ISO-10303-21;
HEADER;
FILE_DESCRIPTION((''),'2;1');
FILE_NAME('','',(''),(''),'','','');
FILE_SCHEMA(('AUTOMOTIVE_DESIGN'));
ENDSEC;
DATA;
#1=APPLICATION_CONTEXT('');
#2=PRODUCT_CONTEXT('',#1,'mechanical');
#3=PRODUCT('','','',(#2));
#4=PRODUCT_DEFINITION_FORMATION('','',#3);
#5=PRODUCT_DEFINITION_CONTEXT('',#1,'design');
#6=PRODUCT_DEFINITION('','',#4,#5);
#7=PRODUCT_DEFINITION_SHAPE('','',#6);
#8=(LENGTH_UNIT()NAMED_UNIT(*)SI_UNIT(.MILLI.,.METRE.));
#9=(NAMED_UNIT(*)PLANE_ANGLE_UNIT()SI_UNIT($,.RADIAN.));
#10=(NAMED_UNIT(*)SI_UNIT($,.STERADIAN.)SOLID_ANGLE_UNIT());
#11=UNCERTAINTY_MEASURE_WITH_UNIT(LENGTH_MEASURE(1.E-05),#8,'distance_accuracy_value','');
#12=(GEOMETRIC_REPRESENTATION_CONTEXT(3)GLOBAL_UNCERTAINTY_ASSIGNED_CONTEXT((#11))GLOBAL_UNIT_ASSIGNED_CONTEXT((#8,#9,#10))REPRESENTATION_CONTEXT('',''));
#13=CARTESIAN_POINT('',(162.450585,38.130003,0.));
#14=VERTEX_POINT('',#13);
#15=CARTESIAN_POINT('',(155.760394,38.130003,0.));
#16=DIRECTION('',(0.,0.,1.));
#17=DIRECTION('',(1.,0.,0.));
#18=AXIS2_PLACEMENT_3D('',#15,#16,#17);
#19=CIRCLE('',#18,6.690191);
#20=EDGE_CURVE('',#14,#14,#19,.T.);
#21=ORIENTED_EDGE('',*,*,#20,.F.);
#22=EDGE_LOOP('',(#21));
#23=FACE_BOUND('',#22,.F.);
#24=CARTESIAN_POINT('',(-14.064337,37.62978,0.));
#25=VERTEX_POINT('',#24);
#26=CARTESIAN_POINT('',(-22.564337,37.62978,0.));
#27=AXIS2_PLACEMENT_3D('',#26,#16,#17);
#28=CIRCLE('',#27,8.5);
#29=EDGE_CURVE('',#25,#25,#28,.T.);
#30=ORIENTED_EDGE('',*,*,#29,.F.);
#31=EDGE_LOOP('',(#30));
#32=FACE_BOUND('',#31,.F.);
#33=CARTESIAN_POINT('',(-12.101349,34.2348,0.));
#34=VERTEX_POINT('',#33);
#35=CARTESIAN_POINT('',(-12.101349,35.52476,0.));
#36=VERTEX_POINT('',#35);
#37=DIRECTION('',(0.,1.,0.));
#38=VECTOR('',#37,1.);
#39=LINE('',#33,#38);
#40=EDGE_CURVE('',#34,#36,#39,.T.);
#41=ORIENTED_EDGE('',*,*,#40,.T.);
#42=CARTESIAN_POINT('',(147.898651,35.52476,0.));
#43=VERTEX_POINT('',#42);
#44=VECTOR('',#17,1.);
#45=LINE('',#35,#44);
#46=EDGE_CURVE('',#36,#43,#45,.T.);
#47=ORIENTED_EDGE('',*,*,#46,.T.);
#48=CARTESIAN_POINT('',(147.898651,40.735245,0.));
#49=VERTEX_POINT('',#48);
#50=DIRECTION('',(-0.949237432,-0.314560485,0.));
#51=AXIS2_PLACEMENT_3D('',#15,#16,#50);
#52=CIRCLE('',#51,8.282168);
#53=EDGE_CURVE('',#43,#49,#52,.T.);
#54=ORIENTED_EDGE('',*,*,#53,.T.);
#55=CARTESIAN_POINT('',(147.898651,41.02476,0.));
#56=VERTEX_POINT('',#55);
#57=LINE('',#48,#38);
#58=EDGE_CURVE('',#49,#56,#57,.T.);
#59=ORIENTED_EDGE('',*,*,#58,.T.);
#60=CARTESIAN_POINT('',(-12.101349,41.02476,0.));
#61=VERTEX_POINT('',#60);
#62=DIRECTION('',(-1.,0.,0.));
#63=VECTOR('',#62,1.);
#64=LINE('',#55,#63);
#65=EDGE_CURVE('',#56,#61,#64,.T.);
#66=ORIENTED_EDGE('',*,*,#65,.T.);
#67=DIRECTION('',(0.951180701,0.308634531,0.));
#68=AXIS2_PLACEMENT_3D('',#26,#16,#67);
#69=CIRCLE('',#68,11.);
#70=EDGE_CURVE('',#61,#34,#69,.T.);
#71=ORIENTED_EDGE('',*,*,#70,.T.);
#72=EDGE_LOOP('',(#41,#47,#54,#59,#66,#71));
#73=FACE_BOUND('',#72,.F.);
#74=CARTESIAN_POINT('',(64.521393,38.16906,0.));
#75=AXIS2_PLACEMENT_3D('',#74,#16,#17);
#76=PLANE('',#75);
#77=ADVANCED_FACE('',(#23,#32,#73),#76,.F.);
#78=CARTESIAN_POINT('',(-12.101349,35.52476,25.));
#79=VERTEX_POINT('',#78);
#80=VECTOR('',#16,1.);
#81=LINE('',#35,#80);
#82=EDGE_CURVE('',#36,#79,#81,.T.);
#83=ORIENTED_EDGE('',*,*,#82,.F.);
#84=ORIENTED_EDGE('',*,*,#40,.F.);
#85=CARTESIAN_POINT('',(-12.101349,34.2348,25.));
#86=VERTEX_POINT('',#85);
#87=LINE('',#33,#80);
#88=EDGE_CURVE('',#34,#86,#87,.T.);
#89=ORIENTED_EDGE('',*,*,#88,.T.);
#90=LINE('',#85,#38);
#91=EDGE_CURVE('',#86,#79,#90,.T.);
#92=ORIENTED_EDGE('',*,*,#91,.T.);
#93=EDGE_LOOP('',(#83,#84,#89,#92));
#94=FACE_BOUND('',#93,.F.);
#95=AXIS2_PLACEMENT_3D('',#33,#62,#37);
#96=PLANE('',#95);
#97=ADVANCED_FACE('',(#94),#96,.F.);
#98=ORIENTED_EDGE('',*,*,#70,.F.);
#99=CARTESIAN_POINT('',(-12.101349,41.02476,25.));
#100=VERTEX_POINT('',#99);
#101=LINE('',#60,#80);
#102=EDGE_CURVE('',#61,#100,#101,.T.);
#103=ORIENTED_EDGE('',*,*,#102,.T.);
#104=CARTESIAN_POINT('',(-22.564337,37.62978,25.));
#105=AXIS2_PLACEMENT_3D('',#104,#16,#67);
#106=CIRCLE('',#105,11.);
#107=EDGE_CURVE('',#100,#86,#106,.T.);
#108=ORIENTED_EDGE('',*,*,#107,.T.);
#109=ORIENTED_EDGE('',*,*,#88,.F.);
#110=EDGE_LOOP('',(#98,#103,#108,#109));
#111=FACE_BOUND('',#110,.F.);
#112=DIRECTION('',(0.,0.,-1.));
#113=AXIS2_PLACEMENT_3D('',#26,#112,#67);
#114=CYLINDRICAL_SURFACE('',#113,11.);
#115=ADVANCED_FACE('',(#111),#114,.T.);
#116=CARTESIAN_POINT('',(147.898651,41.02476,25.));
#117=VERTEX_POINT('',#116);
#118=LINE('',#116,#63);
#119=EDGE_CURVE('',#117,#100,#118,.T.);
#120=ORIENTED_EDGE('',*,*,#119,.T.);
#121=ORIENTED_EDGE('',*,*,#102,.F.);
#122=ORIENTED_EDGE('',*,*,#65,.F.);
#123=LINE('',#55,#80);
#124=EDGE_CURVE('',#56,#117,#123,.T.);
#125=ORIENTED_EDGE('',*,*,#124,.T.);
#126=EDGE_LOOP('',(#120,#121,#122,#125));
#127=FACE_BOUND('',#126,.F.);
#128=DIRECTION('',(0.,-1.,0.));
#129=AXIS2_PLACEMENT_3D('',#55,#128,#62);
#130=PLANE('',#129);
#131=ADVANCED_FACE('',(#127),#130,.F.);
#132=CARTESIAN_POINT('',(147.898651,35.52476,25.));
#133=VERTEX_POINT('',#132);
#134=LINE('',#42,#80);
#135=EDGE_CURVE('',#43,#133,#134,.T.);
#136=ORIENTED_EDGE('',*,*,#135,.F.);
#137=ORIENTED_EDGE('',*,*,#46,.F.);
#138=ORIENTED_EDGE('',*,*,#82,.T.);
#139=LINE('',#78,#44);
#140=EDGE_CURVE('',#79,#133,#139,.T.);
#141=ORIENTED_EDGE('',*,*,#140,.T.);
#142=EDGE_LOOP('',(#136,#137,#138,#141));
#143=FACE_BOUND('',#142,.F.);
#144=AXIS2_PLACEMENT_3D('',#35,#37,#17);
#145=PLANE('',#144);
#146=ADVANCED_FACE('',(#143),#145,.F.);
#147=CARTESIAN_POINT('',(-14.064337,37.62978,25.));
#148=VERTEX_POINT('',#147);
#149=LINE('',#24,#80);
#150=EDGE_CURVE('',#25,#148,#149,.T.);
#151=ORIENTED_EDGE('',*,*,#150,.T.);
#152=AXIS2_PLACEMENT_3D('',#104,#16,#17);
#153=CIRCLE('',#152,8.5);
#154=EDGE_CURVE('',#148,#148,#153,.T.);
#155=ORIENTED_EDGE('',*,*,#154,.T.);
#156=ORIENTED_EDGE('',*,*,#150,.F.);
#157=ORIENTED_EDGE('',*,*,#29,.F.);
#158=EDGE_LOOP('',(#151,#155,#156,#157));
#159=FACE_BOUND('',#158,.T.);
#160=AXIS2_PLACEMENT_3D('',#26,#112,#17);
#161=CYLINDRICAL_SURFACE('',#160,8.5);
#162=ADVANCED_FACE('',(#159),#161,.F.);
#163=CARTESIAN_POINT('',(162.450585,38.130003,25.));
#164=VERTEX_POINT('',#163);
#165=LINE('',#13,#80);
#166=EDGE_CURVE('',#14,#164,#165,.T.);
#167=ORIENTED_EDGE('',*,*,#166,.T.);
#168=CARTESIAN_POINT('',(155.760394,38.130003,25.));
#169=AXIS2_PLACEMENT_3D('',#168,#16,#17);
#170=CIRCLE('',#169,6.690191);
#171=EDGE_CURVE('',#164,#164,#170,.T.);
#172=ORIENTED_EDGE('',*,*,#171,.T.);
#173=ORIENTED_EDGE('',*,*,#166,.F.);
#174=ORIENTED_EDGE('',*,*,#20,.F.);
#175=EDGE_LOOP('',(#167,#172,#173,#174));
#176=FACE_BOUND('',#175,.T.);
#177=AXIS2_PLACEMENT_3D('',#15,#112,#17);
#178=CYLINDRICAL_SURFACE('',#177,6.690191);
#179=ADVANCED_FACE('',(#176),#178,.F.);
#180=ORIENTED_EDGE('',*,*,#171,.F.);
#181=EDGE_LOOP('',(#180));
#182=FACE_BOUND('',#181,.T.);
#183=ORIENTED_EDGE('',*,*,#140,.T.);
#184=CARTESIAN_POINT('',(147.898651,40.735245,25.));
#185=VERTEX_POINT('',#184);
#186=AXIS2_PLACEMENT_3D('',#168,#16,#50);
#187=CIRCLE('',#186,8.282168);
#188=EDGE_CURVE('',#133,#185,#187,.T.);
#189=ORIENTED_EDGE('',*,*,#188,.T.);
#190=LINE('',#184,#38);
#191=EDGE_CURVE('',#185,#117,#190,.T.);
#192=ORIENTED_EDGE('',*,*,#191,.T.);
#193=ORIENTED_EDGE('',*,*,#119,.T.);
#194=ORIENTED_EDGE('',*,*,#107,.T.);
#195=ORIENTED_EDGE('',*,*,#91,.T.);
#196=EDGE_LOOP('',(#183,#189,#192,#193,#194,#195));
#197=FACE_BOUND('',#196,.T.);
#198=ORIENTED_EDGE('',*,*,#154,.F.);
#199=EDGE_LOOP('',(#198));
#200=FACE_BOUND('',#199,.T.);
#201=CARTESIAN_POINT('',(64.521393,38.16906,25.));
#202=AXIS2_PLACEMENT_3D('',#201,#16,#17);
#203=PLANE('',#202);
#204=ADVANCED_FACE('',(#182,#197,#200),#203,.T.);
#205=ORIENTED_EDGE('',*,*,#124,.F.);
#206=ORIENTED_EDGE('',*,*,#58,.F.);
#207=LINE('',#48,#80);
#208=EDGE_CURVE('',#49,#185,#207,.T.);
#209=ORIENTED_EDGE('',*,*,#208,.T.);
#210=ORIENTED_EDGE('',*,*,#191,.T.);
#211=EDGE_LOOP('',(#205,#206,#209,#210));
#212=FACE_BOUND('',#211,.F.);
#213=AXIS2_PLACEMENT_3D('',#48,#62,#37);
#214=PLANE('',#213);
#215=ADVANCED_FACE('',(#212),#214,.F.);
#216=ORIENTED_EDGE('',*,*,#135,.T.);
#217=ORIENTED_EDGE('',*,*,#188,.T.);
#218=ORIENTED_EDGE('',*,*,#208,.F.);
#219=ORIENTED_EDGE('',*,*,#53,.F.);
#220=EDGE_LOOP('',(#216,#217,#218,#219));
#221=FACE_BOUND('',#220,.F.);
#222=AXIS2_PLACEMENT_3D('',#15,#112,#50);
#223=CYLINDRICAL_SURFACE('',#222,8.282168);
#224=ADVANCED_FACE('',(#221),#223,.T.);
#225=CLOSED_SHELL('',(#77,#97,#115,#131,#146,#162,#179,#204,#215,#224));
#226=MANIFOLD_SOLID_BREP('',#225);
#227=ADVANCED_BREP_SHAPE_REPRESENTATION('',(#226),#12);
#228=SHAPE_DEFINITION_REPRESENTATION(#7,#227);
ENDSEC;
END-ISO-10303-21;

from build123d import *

# Parameters (mm, degrees)
F0_R     = 8.5
F0_R_2   = 6.6901913145
F1_DEPTH = 25


# Not quite as in the source:
# - a feature names something its author has since deleted; it is built from what else it names


with BuildPart() as f1:
    # F0 (on Top) → F1 (new body)
    with BuildSketch(Plane.XY):
        with BuildLine():
            Line((147.8986507368, 41.0247598798), (-12.1013492632, 41.0247598798))
            ThreePointArc((-12.1013492632, 41.0247598798), (-33.5643369753, 37.6297800364), (-12.1013492632, 34.2348001929))
            Line((-12.1013492632, 34.2348001929), (-12.1013492632, 35.5247598798))
            Line((-12.1013492632, 35.5247598798), (147.8986507368, 35.5247598798))
            ThreePointArc((147.8986507368, 35.5247598798), (164.0425617184, 38.1300025139), (147.8986507368, 40.735245148))
            Line((147.8986507368, 40.735245148), (147.8986507368, 41.0247598798))
        make_face()
        with Locations((-22.5643369753, 37.6297800364)):
            Circle(F0_R, mode=Mode.SUBTRACT)
        with Locations((155.7603941795, 38.1300025139)):
            Circle(F0_R_2, mode=Mode.SUBTRACT)
    extrude(amount=F1_DEPTH)


solid = f1.part
